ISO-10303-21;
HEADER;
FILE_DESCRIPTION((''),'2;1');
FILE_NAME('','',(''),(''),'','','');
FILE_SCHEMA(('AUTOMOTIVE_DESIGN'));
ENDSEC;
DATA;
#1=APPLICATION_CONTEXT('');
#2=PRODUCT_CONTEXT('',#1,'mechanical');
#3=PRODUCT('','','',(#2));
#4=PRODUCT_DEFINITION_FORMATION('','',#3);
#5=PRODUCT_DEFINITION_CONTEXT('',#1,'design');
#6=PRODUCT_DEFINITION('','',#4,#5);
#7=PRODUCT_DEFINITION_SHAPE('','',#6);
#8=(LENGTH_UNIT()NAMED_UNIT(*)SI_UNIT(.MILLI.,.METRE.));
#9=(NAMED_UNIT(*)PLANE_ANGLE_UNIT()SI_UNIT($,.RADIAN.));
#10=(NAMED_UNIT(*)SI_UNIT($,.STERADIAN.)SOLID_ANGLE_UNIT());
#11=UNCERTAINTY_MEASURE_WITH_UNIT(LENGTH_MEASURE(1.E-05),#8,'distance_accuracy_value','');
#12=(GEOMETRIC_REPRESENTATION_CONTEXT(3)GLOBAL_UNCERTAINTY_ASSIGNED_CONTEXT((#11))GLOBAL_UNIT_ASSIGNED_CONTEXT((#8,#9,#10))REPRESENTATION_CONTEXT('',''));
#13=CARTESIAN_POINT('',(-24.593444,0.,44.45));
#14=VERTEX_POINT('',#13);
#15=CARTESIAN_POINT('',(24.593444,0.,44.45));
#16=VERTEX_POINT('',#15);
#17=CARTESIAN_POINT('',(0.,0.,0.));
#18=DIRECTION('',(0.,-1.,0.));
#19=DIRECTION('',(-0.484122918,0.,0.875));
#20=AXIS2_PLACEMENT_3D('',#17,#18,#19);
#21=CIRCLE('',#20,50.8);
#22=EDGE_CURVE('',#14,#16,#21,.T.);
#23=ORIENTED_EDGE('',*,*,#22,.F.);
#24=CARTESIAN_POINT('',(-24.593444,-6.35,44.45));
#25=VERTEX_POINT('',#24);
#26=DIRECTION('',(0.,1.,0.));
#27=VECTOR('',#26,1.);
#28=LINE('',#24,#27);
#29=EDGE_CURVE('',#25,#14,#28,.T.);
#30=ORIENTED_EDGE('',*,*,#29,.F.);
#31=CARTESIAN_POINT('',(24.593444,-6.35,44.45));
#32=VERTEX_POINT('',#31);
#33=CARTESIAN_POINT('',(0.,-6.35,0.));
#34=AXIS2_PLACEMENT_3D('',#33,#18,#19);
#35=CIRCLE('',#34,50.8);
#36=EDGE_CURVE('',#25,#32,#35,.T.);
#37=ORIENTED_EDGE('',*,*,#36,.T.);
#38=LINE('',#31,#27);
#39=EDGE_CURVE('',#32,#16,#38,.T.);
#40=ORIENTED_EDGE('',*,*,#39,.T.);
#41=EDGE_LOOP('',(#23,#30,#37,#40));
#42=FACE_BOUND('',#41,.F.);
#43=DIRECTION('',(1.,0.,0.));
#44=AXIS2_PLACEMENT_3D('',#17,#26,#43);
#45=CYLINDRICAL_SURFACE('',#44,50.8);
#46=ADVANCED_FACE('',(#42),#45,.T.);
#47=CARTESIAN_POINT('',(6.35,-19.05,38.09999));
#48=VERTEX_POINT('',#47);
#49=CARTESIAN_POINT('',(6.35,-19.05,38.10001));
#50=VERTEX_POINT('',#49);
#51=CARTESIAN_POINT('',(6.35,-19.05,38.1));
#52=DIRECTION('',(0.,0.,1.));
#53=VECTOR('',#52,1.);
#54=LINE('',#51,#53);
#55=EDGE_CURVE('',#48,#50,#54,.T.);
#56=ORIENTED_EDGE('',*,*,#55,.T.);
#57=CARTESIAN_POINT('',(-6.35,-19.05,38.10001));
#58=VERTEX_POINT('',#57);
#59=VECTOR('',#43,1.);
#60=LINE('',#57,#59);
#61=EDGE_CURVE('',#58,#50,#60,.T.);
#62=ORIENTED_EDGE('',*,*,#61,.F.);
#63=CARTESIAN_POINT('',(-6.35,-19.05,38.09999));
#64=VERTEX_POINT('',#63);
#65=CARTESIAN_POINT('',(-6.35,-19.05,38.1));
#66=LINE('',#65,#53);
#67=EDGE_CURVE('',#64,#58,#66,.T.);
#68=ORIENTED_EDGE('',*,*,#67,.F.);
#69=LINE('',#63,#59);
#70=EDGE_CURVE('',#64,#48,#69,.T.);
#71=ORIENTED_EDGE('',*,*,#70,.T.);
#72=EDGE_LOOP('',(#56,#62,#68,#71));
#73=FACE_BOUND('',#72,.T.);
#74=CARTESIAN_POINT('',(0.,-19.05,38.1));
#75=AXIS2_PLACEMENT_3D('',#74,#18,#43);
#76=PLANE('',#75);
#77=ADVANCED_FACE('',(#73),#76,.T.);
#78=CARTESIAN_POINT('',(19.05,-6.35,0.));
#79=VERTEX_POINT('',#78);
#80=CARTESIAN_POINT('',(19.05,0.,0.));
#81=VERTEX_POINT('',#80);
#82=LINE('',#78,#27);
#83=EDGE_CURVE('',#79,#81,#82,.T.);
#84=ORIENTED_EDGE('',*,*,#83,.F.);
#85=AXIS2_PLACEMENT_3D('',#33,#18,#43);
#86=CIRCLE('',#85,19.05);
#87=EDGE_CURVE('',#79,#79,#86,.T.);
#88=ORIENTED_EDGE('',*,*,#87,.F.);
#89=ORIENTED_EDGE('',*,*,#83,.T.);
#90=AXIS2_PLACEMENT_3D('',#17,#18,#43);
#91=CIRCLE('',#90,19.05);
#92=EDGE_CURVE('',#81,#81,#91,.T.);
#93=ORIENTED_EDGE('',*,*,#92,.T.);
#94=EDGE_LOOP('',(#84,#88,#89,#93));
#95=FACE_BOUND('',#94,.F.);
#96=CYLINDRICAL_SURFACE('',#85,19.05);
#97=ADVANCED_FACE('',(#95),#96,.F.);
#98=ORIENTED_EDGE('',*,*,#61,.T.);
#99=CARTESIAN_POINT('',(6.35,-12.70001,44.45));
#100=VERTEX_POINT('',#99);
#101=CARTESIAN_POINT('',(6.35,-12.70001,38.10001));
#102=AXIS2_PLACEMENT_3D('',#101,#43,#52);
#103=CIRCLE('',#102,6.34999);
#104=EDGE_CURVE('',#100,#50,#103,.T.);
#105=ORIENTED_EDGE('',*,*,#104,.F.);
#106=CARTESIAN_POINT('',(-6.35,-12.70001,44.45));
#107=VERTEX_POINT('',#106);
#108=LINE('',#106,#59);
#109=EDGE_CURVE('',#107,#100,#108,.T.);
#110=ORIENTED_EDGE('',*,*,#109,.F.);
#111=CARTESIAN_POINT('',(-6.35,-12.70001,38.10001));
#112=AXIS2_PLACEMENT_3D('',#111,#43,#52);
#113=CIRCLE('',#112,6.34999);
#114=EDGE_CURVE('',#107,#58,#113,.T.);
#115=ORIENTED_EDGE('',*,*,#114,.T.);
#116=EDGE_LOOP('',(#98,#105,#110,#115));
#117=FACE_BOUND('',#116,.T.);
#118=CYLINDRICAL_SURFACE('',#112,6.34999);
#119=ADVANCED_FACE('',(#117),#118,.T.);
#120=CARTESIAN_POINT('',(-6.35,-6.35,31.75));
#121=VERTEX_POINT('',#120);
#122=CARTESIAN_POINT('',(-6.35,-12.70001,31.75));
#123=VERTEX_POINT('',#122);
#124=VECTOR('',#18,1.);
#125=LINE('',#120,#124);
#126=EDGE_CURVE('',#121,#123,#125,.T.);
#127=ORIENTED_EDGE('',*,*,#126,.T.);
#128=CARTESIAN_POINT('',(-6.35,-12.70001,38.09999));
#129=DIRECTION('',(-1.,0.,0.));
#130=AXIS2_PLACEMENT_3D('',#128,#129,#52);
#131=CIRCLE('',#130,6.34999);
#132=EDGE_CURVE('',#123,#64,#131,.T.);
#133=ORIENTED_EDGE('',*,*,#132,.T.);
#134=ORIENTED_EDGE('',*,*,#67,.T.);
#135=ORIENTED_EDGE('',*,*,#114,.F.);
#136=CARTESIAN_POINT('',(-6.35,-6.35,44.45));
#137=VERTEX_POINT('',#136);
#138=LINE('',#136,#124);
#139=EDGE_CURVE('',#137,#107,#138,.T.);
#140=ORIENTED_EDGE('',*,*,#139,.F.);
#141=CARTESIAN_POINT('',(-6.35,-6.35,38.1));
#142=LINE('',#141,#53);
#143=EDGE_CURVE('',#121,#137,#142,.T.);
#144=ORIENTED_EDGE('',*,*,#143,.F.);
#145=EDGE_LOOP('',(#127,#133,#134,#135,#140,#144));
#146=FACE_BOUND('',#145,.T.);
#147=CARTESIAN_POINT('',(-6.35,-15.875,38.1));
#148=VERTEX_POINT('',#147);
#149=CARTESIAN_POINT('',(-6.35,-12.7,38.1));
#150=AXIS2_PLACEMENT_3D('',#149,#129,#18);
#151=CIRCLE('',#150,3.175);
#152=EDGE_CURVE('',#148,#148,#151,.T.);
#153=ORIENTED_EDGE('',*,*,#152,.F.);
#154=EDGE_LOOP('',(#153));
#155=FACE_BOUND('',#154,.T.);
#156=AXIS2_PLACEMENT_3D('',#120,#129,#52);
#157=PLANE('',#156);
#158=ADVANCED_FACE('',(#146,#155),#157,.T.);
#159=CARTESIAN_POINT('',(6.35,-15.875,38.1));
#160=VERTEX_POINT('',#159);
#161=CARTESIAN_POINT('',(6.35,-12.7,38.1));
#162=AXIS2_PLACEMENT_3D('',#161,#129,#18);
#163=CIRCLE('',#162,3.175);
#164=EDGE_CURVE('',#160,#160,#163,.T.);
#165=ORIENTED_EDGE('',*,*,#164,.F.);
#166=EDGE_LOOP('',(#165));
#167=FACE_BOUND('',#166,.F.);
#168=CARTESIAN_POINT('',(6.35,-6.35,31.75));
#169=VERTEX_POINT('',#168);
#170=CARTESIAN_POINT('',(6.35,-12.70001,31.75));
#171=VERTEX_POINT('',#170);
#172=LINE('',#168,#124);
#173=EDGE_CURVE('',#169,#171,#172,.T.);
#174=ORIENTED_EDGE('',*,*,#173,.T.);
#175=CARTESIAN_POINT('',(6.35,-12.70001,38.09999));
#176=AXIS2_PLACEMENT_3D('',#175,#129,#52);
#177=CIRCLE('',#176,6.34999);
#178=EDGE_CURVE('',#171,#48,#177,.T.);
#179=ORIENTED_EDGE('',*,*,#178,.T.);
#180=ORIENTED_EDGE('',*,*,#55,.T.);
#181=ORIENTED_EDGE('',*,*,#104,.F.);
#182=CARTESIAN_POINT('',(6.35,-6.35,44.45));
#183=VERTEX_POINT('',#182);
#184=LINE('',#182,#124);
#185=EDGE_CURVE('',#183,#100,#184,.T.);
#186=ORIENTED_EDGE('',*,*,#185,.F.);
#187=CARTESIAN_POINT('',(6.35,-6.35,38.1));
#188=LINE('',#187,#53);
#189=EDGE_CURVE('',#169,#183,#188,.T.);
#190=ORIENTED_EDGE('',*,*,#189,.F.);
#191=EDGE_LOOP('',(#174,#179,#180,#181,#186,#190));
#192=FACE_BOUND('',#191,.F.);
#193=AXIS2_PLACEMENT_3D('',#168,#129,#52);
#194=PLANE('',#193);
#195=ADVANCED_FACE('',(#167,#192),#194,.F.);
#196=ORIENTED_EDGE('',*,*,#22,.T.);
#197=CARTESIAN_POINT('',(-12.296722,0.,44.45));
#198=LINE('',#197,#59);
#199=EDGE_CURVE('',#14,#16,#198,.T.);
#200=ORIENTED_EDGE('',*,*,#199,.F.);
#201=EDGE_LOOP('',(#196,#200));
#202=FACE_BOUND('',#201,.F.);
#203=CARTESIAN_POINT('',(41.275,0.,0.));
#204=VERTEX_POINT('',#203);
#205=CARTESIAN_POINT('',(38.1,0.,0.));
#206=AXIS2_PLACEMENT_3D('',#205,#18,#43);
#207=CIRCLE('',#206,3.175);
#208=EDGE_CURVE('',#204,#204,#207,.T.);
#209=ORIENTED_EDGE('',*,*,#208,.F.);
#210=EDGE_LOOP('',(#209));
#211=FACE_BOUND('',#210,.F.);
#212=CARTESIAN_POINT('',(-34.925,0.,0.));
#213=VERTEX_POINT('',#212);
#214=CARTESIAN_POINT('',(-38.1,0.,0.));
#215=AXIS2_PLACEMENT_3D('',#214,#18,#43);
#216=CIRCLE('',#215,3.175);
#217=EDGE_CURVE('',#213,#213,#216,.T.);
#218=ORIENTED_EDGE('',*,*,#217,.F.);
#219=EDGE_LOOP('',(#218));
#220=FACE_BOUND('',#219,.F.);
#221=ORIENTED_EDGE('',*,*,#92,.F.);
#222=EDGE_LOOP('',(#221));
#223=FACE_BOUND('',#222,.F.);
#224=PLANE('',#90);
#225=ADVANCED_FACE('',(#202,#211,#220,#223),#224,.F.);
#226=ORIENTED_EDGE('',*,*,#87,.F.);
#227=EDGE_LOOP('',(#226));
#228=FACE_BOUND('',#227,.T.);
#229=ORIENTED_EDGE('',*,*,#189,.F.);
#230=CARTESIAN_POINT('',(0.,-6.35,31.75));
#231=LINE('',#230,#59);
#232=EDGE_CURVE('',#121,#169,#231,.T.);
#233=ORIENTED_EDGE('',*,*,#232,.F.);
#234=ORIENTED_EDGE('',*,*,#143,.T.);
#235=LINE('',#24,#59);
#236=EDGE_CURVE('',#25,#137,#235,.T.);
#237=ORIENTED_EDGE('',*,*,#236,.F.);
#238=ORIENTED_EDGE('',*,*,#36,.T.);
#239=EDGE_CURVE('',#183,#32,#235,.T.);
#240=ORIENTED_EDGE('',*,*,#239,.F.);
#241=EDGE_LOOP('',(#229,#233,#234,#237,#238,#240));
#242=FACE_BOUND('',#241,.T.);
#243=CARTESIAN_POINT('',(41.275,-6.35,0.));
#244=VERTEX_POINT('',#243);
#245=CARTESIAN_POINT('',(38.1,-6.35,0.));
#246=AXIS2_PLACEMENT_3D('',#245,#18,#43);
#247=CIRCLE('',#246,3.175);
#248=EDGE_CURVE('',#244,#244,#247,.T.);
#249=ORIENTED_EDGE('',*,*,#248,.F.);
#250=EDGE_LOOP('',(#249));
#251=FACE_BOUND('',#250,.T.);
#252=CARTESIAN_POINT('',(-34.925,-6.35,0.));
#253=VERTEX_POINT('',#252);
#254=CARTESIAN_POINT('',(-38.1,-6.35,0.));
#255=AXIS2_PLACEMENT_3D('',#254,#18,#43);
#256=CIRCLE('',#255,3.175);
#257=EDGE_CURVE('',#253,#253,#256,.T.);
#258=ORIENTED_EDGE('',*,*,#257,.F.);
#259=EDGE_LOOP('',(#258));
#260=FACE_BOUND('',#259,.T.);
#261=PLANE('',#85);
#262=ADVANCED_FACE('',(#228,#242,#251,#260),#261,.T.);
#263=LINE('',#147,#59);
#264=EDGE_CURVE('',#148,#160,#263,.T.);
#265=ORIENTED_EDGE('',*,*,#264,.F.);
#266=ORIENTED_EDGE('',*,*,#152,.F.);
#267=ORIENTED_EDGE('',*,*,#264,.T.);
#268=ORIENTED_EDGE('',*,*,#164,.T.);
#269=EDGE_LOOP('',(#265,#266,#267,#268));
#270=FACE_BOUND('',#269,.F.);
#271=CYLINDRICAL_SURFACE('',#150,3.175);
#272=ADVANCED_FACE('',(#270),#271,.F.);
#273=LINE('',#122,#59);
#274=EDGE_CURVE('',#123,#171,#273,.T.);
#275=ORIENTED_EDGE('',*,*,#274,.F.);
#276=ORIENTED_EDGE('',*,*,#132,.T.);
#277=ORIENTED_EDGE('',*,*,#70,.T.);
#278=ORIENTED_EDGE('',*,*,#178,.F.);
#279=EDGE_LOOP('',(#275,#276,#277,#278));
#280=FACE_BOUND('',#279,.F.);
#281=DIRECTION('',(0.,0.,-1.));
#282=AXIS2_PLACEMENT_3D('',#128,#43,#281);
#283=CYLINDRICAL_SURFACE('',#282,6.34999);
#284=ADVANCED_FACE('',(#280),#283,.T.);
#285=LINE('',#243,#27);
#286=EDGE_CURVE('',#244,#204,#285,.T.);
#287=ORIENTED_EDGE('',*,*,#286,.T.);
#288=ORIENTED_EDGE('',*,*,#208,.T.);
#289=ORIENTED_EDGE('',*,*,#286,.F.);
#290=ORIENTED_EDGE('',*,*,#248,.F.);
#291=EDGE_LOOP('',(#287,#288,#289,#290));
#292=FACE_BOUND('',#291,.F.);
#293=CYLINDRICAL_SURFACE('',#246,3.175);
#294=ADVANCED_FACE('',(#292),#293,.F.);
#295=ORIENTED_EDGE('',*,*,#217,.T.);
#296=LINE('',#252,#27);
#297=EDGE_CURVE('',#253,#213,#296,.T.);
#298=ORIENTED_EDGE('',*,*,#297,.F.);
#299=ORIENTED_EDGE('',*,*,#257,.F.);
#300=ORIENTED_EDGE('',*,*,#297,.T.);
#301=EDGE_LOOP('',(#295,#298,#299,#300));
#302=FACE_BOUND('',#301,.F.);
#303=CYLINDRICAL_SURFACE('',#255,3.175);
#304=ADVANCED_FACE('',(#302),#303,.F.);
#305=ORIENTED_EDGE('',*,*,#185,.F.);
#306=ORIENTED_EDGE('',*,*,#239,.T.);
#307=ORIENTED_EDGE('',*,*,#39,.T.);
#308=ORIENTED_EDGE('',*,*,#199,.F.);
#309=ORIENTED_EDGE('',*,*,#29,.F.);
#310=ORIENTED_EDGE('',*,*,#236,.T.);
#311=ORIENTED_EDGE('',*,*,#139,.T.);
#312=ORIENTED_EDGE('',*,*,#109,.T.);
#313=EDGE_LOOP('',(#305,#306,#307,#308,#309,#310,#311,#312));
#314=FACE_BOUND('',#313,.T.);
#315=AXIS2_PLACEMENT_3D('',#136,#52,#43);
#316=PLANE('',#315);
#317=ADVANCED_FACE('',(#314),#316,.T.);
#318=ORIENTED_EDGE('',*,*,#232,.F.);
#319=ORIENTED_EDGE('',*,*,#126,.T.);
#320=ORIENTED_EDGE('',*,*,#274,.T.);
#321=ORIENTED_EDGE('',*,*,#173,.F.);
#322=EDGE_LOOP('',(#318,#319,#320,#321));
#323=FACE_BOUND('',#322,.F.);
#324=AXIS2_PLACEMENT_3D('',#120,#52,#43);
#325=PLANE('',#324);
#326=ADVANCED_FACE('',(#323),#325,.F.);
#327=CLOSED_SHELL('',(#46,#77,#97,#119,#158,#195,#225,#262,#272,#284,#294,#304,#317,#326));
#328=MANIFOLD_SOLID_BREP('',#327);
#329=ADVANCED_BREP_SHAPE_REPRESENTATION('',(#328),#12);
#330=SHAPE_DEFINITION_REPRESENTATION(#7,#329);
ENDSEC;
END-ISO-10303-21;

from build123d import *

# Parameters (mm, degrees)
F0_R      = 50.8
F1_DEPTH  = 6.35
F2_W      = 12.7
F2_H      = 12.7
F3_DEPTH  = 12.7
F4_R      = 6.34999
F5_R      = 3.175
F6_DEPTH  = 57.151
F7_R      = 3.175
F7_R_2    = 19.05
F8_DEPTH  = 6.351
F10_DEPTH = 6.351


# Not quite as in the source:
# - a fillet or chamfer is up to 0.001 mm smaller than in the source, because OpenCascade refuses the exact size


with BuildPart() as f1:
    # F0 (on Front) → F1 (new body)
    with BuildSketch(Plane.XZ):
        Circle(F0_R)
    extrude(amount=F1_DEPTH)

    # F2 (on face) → F3 (join)
    with BuildSketch(Plane.XZ.offset(6.35)):
        with Locations((0, 38.1)):
            Rectangle(F2_W, F2_H)
    extrude(amount=F3_DEPTH)

    # F4 (radius 6.35 in the source; OpenCascade refuses exactly that, so slightly less here)
    f4_edges = [f1.edges().sort_by_distance(p)[0] for p in [
        (0, -19.05, 31.75),
        (0, -19.05, 44.45),
    ]]
    fillet(f4_edges, radius=F4_R)

    # F5 (on face) → F6 (cut, through all)
    with BuildSketch(Plane(origin=(-6.35, 0, 0), x_dir=(0, -1, 0), z_dir=(-1, 0, 0))):
        with Locations((12.7, 38.1)):
            Circle(F5_R)
    extrude(amount=-F6_DEPTH, mode=Mode.SUBTRACT)

    # F7 (on face) → F8 (cut, through all)
    with BuildSketch(Plane.XZ.offset(6.35)):
        with Locations((-38.1, 0)):
            Circle(F7_R)
        with Locations((38.1, 0)):
            Circle(F7_R)
        Circle(F7_R_2)
    extrude(amount=-F8_DEPTH, mode=Mode.SUBTRACT)

    # F9 (on face) → F10 (cut, through all)
    with BuildSketch(Plane.XZ.offset(6.35)):
        with BuildLine():
            Line((-24.5934442484, 44.45), (6.35, 44.45))
            Line((6.35, 44.45), (24.5934442484, 44.45))
            ThreePointArc((24.5934442484, 44.45), (0, 50.8), (-24.5934442484, 44.45))
        make_face()
    extrude(amount=-F10_DEPTH, mode=Mode.SUBTRACT)


solid = f1.part
